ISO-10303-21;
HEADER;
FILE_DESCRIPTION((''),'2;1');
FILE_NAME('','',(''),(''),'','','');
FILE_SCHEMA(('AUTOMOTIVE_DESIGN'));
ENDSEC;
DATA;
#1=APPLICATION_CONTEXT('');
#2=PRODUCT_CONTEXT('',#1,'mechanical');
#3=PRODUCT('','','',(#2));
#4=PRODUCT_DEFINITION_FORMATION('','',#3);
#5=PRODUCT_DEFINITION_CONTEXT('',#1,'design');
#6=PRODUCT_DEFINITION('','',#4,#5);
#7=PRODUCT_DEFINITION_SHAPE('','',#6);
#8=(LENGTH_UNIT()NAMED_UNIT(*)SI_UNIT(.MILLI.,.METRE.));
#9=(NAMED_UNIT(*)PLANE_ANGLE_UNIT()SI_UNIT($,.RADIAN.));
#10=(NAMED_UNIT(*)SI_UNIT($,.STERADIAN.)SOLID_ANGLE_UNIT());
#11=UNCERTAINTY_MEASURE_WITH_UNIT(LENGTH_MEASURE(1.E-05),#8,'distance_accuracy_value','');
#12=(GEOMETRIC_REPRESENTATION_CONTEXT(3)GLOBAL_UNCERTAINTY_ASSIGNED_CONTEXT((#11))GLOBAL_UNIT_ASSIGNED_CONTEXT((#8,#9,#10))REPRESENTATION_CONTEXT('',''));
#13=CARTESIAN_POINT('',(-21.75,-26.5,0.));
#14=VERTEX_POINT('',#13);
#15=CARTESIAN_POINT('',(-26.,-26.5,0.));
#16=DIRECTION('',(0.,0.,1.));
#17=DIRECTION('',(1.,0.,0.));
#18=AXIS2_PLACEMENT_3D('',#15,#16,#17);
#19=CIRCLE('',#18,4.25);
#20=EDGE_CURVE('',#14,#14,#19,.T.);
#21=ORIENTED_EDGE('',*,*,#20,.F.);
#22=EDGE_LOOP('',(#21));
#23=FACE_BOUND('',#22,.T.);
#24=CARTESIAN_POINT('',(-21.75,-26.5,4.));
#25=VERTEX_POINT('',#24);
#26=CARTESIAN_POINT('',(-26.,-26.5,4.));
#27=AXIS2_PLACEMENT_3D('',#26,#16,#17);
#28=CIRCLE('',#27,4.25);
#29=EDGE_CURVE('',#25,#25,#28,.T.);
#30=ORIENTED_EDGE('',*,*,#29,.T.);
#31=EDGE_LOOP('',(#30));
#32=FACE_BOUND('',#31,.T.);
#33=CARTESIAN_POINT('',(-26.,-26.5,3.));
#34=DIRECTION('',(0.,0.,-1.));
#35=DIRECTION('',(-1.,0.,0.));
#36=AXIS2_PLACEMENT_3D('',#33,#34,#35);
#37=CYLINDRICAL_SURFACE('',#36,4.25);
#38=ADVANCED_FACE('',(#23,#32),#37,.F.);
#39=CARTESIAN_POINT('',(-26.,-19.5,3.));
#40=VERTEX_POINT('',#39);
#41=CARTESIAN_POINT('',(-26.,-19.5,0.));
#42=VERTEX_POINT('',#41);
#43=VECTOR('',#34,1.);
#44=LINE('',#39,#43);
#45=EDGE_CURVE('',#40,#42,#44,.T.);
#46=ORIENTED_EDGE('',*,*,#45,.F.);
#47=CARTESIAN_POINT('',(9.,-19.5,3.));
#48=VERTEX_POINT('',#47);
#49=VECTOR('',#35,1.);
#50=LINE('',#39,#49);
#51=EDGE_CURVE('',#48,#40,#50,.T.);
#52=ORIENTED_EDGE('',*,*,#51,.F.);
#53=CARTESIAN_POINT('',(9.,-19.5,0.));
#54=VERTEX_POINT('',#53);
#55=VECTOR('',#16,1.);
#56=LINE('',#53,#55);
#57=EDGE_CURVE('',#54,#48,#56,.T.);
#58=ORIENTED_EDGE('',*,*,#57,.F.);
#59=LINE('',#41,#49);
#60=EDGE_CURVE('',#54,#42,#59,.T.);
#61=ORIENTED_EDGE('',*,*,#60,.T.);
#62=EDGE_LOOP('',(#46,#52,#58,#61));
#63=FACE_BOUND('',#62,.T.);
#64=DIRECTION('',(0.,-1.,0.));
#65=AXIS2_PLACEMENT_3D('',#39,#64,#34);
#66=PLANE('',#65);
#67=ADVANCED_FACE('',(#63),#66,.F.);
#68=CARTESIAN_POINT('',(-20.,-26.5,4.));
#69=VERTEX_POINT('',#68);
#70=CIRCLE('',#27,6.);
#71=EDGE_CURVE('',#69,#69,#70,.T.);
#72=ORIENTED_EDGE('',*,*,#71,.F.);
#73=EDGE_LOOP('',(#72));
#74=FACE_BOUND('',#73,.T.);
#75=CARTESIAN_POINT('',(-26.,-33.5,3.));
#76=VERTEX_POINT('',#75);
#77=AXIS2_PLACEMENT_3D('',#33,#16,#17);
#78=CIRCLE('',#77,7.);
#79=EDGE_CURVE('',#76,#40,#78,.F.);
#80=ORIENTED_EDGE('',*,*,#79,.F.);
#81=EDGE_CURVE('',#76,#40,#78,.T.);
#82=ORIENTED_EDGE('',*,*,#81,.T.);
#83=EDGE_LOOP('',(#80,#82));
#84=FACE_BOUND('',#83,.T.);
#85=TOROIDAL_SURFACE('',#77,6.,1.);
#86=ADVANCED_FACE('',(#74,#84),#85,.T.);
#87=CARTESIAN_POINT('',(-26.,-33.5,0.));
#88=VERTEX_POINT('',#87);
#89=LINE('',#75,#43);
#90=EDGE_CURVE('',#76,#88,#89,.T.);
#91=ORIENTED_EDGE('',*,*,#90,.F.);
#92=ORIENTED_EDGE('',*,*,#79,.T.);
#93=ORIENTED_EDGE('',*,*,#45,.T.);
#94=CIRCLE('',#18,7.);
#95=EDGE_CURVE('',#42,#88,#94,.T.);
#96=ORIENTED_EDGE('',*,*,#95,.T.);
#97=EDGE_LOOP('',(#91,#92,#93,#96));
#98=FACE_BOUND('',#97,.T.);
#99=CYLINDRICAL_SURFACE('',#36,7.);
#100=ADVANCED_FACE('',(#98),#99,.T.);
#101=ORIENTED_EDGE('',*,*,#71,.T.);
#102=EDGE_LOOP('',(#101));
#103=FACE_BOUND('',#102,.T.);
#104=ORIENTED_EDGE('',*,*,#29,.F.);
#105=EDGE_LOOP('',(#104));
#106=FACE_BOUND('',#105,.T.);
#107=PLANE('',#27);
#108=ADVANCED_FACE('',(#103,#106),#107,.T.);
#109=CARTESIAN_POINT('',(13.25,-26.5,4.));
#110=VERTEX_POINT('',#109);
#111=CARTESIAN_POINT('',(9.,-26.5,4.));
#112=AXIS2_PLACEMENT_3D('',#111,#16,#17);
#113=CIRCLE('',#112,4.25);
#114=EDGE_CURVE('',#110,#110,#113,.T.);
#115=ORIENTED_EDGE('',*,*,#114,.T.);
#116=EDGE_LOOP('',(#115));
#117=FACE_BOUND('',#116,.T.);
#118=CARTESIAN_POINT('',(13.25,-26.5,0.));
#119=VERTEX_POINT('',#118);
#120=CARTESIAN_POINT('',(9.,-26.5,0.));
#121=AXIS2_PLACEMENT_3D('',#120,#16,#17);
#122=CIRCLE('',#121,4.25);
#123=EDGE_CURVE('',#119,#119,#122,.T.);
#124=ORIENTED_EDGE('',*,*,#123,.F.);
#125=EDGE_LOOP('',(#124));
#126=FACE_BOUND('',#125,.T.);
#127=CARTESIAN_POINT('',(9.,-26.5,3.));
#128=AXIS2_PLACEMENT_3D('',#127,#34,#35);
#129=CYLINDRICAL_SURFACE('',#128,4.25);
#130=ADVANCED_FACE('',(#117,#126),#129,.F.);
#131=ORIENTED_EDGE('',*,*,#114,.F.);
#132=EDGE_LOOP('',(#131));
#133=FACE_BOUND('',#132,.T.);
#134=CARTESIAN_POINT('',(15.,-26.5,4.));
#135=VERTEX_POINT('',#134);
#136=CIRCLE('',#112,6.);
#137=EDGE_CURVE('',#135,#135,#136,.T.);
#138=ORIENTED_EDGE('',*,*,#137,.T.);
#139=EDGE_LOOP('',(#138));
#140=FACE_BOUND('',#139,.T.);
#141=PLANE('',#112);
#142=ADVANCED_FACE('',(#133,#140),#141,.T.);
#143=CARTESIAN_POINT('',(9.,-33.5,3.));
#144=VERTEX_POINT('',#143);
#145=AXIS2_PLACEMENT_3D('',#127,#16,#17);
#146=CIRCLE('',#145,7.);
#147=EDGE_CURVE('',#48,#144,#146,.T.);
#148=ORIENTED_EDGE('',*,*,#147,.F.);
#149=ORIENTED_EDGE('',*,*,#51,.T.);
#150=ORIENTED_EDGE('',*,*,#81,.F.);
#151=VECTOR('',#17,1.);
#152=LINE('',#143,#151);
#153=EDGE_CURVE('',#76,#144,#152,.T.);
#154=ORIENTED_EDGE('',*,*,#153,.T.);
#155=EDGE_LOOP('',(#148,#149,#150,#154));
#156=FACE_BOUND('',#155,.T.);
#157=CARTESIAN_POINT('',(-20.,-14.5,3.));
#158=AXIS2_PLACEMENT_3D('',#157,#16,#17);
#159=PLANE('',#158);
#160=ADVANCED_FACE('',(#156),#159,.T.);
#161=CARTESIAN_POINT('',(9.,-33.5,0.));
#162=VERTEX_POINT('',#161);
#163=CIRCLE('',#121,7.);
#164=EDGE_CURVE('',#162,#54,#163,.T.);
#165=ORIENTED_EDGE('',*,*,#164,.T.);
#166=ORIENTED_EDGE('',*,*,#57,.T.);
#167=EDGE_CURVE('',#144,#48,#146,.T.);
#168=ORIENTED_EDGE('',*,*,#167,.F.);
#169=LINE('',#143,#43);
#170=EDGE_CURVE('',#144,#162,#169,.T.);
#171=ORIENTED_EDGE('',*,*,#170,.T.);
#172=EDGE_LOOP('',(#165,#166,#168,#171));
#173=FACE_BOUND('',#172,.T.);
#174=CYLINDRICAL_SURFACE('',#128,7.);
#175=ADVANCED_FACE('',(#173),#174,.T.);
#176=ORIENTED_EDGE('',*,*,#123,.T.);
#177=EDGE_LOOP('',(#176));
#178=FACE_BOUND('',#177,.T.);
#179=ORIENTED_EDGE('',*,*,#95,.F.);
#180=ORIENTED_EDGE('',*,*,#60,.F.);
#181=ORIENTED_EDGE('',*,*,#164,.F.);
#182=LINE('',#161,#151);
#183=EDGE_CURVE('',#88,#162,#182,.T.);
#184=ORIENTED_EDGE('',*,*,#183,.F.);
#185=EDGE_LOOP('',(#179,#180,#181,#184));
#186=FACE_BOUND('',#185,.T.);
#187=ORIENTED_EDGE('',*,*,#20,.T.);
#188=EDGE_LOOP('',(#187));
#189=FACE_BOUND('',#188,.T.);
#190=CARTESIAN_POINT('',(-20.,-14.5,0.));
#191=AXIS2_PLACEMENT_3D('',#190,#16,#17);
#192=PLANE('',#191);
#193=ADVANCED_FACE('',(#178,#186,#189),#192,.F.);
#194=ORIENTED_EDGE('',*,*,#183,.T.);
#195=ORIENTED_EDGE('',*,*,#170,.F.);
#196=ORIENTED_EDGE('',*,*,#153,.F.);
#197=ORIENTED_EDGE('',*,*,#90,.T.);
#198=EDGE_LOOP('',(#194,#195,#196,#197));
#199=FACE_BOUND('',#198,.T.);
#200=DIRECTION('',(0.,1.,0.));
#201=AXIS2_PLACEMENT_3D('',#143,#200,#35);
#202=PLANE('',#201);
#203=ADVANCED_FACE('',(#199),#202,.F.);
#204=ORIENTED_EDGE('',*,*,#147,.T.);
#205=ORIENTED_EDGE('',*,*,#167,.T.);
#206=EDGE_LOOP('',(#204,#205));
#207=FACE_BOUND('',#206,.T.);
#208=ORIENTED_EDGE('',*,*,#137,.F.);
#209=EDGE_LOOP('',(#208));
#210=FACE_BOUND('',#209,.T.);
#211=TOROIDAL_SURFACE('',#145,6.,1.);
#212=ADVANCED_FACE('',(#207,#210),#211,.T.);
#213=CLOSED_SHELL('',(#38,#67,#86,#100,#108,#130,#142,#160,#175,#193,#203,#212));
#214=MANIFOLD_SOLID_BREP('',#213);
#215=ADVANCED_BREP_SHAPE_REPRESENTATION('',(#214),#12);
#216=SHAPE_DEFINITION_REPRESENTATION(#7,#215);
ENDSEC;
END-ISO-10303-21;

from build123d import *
from build123d.topology import SkipClean

# Parameters (mm, degrees)
SKETCH1_R           = 4.25
SKETCH1_W           = 20
SKETCH1_H           = 5
BOSS_EXTRUDE1_DEPTH = 3
SKETCH2_R           = 7
SKETCH2_R_2         = 4.25
BOSS_EXTRUDE2_DEPTH = 1
FILLET1_R           = 1
CUT_EXTRUDE1_DEPTH  = 48.11952886


with BuildPart() as part:
    # Sketch1 → Boss-Extrude1 (new body)
    with BuildSketch(Plane.XY):
        with BuildLine():
            Line((9, -33.5), (-26, -33.5))
            ThreePointArc((-26, -33.5), (-33, -26.5), (-26, -19.5))
            Line((-26, -19.5), (-20, -19.5))
            ThreePointArc((-20, -19.5), (-16.464466094, -18.035533906), (-15, -14.5))
            Line((-15, -14.5), (-15, 28.5))
            ThreePointArc((-15, 28.5), (-13.535533906, 32.035533906), (-10, 33.5))
            Line((-10, 33.5), (10, 33.5))
            ThreePointArc((10, 33.5), (13.535533906, 32.035533906), (15, 28.5))
            Line((15, 28.5), (15, -22.894448725))
            ThreePointArc((15, -22.894448725), (15.092571663, -29.946820352), (9, -33.5))
        make_face()
        with Locations((9, -26.5)):
            Circle(SKETCH1_R, mode=Mode.SUBTRACT)
        with Locations((-26, -26.5)):
            Circle(SKETCH1_R, mode=Mode.SUBTRACT)
        with Locations((0, 26)):
            Rectangle(SKETCH1_W, SKETCH1_H, mode=Mode.SUBTRACT)
    extrude(amount=BOSS_EXTRUDE1_DEPTH)

    # Sketch2 → Boss-Extrude2 (add)
    # profile 1 of 2: a face of its own
    with BuildSketch(Plane.XY.offset(3)):
        with Locations(Location((-26, -26.5, 0), (0, 0, 270))):
            Circle(SKETCH2_R)
        with Locations((-26, -26.5)):
            Circle(SKETCH2_R_2, mode=Mode.SUBTRACT)
    # profile 2 of 2: a face of its own
    with BuildSketch(Plane.XY.offset(3)):
        with Locations(Location((9, -26.5, 0), (0, 0, 270))):
            Circle(SKETCH2_R)
        with Locations((9, -26.5)):
            Circle(SKETCH2_R_2, mode=Mode.SUBTRACT)
    extrude(amount=BOSS_EXTRUDE2_DEPTH)

    # Fillet1
    fillet1_edges = [part.edges().sort_by_distance(p)[0] for p in [
        (-26, -19.5, 4),
        (9, -19.5, 4),
    ]]
    fillet(fillet1_edges, radius=FILLET1_R - 0.0001)  # a hair under: the kernel refuses the full size

    # Sketch3 → Cut-Extrude1 (cut, through all)
    with SkipClean():  # the faces are left unmerged after this step: merging them gives an invalid solid
        with BuildSketch(Plane.XY.offset(3)):
            with BuildLine():
                Line((-20, -19.5), (9, -19.5))
                ThreePointArc((9, -19.5), (12.446820352, -20.407428337), (15, -22.894448725))
                Line((15, -22.894448725), (15, 33.5))
                Line((15, 33.5), (-20, 33.5))
                Line((-20, 33.5), (-20, -19.5))
            make_face()
        extrude(amount=-CUT_EXTRUDE1_DEPTH, mode=Mode.SUBTRACT)


solid = part.part
